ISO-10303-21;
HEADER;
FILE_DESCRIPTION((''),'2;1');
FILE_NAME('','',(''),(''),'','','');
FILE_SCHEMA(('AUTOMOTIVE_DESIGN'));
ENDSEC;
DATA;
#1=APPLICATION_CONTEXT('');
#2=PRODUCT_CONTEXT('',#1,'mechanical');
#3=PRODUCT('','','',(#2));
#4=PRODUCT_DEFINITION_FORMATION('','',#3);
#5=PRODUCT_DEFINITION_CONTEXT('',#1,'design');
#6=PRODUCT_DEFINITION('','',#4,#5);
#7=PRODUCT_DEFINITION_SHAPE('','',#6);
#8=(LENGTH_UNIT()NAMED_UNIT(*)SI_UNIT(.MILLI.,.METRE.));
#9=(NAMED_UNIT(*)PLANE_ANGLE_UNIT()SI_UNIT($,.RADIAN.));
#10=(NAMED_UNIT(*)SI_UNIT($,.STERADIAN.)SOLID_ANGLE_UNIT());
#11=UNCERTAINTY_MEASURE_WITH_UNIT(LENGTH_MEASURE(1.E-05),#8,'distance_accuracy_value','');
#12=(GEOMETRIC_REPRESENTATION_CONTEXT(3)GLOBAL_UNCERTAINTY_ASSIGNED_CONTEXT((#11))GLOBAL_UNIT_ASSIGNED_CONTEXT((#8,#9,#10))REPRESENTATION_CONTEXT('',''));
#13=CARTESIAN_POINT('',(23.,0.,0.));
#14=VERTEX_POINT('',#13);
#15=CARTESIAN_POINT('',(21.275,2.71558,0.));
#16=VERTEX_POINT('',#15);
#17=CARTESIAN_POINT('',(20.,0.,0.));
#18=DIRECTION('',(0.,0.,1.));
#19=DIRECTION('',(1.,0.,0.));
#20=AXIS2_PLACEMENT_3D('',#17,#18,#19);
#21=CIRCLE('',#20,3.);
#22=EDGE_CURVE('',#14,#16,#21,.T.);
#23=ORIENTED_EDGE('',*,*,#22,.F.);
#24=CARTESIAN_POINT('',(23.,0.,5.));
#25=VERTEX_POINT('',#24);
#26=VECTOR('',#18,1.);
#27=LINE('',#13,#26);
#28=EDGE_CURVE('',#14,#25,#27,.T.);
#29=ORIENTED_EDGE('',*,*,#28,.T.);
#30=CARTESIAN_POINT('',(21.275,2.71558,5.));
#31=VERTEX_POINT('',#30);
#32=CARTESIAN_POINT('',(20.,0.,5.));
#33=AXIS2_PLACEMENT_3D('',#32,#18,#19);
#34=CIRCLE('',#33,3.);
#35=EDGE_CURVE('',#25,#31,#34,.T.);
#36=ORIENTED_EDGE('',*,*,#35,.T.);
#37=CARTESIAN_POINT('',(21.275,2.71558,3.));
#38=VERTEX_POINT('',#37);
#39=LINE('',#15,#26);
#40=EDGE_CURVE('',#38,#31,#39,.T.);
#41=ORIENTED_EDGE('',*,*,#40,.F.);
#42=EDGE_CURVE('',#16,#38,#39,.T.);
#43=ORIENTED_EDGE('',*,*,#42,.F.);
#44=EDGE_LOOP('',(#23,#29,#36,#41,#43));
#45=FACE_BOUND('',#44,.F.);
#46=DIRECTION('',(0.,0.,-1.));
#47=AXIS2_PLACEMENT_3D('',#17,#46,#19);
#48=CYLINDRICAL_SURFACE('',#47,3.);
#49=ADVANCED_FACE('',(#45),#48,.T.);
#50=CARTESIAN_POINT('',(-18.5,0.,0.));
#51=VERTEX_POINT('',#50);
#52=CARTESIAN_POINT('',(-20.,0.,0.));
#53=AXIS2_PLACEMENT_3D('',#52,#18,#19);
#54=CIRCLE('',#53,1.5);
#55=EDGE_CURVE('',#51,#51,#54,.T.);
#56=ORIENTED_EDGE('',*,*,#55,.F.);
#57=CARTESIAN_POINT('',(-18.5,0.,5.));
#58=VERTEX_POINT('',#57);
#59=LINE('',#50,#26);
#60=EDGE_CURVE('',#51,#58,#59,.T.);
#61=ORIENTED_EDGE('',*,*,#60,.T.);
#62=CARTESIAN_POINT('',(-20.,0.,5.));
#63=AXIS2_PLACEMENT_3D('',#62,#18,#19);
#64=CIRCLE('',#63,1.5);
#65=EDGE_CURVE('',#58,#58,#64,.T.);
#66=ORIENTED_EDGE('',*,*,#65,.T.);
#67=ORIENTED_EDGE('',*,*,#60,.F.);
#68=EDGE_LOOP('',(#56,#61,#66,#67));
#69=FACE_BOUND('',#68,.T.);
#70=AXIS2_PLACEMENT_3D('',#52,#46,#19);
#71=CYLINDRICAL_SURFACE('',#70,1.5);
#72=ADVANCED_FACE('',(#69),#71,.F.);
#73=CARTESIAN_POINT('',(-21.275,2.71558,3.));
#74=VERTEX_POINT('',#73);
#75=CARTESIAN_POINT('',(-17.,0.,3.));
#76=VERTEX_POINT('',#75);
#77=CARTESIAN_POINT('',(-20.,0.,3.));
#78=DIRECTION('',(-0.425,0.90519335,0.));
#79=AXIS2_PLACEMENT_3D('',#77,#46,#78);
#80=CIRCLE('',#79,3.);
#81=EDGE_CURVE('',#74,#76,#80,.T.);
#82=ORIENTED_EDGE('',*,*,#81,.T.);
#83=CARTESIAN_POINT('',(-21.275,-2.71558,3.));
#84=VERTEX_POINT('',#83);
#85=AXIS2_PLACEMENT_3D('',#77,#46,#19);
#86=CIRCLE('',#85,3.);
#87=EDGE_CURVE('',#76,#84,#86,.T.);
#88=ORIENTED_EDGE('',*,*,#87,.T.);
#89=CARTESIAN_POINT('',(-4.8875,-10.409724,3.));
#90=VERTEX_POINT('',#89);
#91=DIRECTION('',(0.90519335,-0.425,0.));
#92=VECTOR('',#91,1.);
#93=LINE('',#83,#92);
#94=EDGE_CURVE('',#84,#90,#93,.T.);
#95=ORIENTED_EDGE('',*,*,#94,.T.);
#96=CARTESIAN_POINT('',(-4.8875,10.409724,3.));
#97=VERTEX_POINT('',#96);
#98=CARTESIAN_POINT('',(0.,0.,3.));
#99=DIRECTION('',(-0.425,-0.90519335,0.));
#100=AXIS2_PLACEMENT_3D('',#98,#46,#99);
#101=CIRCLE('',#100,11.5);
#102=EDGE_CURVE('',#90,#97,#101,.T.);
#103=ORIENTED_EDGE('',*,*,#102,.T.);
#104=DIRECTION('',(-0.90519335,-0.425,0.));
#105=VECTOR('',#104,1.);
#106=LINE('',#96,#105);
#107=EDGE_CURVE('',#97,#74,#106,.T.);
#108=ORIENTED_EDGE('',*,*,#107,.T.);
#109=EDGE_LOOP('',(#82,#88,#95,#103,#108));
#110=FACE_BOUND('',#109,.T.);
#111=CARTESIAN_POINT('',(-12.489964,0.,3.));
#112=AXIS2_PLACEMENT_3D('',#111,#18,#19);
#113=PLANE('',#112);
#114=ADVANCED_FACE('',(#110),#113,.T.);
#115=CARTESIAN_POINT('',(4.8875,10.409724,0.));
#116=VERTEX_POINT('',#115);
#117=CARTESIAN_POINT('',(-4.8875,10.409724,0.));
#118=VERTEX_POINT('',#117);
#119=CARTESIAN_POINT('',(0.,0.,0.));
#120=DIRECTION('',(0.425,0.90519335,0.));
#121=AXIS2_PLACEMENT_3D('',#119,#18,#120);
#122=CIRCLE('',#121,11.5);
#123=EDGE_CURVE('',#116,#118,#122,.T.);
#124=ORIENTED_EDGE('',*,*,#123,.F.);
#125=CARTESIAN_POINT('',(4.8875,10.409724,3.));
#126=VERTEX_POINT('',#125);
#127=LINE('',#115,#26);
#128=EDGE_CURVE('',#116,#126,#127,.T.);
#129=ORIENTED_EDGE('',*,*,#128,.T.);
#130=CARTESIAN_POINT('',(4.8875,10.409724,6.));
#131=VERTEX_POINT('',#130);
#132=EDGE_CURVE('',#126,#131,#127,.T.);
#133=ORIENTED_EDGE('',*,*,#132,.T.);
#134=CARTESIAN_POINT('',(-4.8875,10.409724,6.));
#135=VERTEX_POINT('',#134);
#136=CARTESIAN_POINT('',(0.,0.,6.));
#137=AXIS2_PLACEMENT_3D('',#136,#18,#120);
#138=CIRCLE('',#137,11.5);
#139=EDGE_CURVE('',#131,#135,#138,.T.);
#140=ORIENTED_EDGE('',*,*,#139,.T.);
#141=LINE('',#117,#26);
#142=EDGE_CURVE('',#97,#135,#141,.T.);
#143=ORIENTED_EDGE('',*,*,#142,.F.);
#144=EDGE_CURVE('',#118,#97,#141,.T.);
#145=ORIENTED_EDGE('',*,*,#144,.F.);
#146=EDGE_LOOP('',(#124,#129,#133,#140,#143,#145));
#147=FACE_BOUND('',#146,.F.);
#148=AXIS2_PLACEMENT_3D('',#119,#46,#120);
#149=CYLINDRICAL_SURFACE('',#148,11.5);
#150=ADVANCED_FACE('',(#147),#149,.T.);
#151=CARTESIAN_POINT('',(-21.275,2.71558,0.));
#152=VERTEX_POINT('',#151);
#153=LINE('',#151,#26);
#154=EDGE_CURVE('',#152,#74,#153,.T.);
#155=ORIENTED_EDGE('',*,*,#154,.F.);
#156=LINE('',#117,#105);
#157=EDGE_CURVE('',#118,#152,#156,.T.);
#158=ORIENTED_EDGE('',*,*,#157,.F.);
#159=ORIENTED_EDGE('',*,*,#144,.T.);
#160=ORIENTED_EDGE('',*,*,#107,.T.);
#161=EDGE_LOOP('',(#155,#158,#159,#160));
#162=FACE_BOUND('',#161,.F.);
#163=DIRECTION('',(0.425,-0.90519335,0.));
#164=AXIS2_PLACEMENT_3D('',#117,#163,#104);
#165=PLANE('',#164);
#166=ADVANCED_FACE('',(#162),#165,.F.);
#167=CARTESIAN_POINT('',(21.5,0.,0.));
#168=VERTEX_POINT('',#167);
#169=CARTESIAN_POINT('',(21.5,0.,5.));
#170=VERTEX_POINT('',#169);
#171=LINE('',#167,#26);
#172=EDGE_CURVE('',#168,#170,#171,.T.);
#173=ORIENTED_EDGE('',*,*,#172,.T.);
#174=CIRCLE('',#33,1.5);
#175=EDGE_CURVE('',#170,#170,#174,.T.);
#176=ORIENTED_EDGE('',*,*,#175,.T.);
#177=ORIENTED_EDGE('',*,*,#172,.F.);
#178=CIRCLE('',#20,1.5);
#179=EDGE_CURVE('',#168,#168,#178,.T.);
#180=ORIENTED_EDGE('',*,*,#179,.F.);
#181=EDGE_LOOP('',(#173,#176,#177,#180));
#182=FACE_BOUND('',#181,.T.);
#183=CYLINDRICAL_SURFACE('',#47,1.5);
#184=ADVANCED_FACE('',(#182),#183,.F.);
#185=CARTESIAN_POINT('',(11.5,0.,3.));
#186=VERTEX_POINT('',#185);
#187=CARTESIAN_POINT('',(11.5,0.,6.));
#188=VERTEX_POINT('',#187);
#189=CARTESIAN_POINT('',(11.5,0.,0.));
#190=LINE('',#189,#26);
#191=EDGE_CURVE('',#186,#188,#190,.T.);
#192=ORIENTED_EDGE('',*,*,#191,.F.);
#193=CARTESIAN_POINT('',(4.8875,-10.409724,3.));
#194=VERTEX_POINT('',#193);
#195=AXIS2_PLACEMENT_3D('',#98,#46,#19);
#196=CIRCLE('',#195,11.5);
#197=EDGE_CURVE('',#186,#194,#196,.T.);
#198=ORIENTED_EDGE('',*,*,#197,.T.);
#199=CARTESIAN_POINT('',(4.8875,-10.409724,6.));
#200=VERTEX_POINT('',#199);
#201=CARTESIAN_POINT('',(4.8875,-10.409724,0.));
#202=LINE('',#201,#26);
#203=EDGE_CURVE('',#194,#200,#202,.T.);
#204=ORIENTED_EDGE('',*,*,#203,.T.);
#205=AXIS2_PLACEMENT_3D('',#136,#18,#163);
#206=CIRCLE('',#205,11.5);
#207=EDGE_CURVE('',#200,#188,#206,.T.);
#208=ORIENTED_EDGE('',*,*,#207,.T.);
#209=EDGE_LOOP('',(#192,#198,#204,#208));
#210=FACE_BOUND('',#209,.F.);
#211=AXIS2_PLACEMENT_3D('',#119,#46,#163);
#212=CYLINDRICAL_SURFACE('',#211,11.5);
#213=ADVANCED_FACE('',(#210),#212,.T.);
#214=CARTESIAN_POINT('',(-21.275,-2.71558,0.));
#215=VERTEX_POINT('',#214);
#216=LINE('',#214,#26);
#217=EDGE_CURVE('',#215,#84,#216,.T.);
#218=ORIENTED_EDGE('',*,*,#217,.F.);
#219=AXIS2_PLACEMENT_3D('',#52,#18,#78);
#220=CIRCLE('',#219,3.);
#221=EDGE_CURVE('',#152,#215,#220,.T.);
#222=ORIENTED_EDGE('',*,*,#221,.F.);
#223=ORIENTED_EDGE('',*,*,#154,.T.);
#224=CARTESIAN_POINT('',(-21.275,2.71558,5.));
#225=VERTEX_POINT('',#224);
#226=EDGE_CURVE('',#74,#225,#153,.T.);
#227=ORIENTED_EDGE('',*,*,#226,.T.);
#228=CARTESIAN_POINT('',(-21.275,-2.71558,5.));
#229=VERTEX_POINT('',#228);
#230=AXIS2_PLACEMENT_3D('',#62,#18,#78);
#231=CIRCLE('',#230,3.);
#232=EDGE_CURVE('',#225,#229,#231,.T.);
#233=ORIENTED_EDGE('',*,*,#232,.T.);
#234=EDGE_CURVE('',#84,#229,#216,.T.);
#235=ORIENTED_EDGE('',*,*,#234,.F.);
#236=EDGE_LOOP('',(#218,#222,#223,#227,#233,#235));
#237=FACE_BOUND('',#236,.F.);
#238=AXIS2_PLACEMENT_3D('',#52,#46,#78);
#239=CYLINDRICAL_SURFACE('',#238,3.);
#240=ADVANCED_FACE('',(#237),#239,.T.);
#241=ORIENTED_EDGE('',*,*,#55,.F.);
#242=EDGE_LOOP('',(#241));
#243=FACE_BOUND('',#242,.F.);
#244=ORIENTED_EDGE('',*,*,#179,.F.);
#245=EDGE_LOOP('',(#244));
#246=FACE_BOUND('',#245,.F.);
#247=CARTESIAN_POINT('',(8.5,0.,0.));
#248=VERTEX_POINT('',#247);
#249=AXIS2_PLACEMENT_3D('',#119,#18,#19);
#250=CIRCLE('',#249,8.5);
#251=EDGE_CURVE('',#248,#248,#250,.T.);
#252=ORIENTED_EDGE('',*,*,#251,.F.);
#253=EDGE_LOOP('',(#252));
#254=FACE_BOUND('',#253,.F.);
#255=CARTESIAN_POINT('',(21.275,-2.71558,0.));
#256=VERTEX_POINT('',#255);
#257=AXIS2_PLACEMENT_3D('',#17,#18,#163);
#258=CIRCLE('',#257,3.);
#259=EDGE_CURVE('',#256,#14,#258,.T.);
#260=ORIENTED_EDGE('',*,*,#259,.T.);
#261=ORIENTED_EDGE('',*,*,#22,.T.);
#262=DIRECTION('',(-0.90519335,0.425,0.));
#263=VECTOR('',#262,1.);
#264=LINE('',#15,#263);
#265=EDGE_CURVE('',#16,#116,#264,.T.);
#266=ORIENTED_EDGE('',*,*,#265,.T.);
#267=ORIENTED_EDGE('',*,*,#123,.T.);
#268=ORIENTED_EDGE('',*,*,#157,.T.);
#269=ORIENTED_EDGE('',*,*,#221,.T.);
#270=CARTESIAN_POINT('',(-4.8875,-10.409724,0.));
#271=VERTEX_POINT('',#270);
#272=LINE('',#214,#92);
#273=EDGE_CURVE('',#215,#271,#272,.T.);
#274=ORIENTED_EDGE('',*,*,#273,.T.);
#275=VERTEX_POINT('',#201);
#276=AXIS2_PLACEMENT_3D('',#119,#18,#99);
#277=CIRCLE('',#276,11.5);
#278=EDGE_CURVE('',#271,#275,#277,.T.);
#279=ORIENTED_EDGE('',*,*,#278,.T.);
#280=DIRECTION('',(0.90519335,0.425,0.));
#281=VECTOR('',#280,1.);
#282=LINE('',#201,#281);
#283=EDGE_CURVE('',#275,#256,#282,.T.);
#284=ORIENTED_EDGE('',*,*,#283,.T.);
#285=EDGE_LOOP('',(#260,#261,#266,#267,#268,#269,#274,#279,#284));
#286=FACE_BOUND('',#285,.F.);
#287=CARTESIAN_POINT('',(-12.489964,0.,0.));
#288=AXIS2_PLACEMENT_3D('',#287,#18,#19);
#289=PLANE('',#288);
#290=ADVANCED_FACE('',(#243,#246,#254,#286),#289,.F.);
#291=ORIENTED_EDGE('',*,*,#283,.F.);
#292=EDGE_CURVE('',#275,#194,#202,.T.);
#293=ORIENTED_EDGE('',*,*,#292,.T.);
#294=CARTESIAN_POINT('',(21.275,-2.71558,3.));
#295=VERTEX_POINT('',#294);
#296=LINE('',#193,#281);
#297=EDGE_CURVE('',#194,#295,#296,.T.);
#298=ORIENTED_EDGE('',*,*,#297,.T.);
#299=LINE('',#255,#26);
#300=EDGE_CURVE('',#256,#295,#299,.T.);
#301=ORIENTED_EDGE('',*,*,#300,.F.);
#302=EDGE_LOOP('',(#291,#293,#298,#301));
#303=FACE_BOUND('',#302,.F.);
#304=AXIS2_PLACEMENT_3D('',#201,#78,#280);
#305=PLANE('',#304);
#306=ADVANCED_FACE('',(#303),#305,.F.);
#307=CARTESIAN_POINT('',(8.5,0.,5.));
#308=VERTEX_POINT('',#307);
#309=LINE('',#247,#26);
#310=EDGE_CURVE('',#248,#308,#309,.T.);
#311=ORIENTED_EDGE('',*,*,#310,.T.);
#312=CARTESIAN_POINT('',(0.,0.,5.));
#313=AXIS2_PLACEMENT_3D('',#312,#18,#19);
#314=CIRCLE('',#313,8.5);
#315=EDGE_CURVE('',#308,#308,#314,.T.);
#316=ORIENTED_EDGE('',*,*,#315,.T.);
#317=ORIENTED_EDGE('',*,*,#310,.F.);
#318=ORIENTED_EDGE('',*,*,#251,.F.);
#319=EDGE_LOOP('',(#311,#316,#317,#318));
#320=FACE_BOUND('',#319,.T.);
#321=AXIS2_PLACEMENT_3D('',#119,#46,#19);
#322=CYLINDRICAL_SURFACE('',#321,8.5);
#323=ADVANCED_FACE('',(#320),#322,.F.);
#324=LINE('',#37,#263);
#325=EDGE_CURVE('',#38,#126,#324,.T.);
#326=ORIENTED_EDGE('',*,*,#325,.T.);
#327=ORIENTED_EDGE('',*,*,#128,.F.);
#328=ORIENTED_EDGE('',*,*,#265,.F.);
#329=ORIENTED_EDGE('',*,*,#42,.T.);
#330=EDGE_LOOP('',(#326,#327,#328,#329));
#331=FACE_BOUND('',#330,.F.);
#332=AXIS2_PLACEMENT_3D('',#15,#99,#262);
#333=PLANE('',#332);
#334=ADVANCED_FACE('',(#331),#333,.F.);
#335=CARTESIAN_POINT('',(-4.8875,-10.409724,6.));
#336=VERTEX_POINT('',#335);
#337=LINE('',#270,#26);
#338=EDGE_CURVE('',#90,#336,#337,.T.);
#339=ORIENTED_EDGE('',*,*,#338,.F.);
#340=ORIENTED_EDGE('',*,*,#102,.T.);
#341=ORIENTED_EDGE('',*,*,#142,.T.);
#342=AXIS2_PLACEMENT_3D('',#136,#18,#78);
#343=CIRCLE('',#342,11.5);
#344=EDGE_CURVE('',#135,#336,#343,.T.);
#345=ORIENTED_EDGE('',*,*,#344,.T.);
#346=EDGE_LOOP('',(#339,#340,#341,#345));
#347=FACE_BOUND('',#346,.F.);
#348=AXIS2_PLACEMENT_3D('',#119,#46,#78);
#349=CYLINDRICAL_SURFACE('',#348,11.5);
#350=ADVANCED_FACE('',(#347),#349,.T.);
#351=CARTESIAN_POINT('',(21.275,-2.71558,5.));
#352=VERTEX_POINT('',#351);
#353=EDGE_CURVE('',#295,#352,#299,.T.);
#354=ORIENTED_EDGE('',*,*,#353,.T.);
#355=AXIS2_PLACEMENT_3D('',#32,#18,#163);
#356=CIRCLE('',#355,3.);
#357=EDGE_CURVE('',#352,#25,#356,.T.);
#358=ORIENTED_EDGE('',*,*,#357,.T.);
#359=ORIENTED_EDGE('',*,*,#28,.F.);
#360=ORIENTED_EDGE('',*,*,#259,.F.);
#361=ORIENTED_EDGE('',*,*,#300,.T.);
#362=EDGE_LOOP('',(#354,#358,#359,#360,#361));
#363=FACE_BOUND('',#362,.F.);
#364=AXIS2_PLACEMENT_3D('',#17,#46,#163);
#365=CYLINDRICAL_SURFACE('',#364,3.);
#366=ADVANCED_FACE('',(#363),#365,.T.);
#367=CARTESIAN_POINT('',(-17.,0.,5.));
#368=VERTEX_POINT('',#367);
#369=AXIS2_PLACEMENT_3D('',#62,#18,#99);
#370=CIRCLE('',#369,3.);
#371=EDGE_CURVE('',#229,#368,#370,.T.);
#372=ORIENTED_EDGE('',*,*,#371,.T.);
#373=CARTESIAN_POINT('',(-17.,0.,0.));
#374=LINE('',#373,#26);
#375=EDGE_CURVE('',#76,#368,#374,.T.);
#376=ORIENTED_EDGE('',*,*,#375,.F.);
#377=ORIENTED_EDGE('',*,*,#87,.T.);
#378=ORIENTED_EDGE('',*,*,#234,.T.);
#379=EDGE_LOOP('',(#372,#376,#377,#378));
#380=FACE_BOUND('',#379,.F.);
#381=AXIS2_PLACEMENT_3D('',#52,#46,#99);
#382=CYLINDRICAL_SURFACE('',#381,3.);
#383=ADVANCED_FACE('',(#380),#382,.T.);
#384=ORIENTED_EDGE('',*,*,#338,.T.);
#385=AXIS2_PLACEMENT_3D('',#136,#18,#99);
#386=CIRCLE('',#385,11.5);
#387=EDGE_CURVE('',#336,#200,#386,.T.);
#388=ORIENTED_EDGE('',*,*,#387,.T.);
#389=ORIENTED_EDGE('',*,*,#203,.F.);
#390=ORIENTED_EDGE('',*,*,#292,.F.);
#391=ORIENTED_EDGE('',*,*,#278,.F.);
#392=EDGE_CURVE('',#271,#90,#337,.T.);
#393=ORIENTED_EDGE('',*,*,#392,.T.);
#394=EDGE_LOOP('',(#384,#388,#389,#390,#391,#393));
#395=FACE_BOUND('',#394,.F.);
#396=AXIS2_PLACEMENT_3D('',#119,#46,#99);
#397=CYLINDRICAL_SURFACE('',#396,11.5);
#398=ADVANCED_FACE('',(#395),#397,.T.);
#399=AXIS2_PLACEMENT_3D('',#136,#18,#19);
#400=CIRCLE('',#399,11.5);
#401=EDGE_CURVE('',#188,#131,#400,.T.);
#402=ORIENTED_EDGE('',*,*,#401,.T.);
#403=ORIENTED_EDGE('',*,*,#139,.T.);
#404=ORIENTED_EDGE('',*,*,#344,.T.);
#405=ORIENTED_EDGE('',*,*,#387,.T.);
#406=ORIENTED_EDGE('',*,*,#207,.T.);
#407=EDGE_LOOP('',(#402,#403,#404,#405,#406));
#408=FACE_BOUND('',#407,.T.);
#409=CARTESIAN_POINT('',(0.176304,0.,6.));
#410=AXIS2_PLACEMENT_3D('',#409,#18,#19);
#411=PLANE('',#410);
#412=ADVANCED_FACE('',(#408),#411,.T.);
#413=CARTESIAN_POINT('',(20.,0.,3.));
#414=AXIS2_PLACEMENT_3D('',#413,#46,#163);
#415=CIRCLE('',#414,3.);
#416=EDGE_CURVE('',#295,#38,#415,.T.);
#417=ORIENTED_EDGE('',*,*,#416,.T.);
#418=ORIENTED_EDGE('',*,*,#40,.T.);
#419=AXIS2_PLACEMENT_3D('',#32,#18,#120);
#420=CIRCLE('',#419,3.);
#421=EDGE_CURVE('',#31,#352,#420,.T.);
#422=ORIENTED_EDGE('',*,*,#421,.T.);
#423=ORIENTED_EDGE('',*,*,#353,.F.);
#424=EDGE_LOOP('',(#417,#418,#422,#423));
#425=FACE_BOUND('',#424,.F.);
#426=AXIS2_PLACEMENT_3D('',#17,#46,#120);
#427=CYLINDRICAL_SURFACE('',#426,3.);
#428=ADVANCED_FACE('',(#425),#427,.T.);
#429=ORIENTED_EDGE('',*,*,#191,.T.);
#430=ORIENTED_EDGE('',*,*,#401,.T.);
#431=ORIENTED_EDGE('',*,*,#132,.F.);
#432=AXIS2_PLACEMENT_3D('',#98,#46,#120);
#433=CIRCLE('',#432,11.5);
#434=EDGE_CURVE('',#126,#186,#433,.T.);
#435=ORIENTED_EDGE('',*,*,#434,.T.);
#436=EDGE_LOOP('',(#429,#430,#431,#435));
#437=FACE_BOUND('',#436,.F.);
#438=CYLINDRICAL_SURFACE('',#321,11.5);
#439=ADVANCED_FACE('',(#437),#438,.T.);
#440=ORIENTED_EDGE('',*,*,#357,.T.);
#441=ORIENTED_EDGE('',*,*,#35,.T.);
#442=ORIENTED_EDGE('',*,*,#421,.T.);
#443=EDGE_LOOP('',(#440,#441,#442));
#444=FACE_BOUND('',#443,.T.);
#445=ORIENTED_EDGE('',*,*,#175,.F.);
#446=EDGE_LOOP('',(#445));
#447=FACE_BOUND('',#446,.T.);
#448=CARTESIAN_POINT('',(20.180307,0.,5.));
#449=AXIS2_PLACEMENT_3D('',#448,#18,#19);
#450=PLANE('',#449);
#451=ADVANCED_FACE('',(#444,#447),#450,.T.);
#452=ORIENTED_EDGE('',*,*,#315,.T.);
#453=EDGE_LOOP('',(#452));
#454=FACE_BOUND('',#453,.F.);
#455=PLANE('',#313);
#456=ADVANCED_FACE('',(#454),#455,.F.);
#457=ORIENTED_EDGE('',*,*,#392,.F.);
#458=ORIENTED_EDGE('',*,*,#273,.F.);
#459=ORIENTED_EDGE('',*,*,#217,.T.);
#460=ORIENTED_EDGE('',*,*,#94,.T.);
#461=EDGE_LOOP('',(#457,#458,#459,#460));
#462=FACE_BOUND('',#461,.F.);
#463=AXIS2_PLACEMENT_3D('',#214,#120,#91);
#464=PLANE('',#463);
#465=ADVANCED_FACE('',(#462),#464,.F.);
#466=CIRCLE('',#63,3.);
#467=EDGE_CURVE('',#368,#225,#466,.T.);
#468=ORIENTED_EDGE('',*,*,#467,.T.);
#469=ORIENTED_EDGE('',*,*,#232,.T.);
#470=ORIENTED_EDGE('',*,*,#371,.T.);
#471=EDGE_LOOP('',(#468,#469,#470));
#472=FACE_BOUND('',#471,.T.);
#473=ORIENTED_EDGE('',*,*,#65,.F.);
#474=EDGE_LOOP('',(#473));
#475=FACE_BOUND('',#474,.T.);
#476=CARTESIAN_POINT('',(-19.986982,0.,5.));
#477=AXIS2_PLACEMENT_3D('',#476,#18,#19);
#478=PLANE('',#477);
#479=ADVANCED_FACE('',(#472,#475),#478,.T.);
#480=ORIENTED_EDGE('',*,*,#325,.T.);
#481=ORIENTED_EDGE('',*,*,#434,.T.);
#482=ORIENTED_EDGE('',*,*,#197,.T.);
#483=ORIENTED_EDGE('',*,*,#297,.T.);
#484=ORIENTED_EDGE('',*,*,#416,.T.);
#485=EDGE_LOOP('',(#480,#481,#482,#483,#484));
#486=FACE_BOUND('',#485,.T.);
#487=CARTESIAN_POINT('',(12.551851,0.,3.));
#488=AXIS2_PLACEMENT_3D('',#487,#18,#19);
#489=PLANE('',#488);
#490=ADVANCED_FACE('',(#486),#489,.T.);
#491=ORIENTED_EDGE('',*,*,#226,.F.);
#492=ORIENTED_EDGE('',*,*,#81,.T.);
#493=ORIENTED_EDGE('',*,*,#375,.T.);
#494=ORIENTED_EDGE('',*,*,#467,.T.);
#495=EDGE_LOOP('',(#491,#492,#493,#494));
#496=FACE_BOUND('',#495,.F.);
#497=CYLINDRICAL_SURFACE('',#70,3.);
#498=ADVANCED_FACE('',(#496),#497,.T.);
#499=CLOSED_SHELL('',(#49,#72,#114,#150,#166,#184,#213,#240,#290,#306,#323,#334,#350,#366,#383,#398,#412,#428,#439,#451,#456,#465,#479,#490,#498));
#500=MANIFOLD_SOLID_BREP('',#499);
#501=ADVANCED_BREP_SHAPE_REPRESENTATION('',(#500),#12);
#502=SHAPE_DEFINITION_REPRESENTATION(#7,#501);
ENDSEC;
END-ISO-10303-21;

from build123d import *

# Parameters (mm, degrees)
F0_R     = 8.5
F1_DEPTH = 6
F2_DEPTH = 5
F0_R_2   = 1.5
F3_DEPTH = 5
F4_DEPTH = 3


with BuildPart() as f1:
    # F0 (on Top) → F1 (new body)
    with BuildSketch(Plane.XY):
        with BuildLine():
            ThreePointArc((4.8875, -10.4097235194), (9.7071172343, -6.1661880445), (11.5, 0))
            ThreePointArc((11.5, 0), (9.7071172343, 6.1661880445), (4.8875, 10.4097235194))
            ThreePointArc((4.8875, 10.4097235194), (0, 11.5), (-4.8875, 10.4097235194))
            ThreePointArc((-4.8875, 10.4097235194), (-11.5, 0), (-4.8875, -10.4097235194))
            ThreePointArc((-4.8875, -10.4097235194), (0, -11.5), (4.8875, -10.4097235194))
        make_face()
        Circle(F0_R, mode=Mode.SUBTRACT)
        Circle(F0_R)
    extrude(amount=F1_DEPTH)

    # F0 (on Top) → F2 (cut)
    with BuildSketch(Plane.XY):
        Circle(F0_R)
    extrude(amount=F2_DEPTH, mode=Mode.SUBTRACT)



with BuildPart() as f3:
    # F0 (on Top) → F3 (new body)
    with BuildSketch(Plane.XY):
        with BuildLine():
            ThreePointArc((-17, 0), (-18.3914292058, 2.5322914524), (-21.275, 2.7155800485))
            ThreePointArc((-21.275, 2.7155800485), (-23, 0), (-21.275, -2.7155800485))
            ThreePointArc((-21.275, -2.7155800485), (-18.3914292058, -2.5322914524), (-17, 0))
        make_face()
        with Locations((-20, 0)):
            Circle(F0_R_2, mode=Mode.SUBTRACT)
    extrude(amount=F3_DEPTH)


with BuildPart() as f3b:
    # F0 (on Top) → F3, piece 2 (new body)
    with BuildSketch(Plane.XY):
        with BuildLine():
            ThreePointArc((23, 0), (22.5322914524, 1.6085707942), (21.275, 2.7155800485))
            ThreePointArc((21.275, 2.7155800485), (17, 0), (21.275, -2.7155800485))
            ThreePointArc((21.275, -2.7155800485), (22.5322914524, -1.6085707942), (23, 0))
        make_face()
        with Locations((20, 0)):
            Circle(F0_R_2, mode=Mode.SUBTRACT)
    extrude(amount=F3_DEPTH)


with BuildPart() as f1_1:
    add(f1.part)

    add(f3.part)  # F4 merges F3

    add(f3b.part)  # F4 merges F3b
    # F0 (on Top) → F4 (join)
    with BuildSketch(Plane.XY):
        with BuildLine():
            ThreePointArc((-4.8875, -10.4097235194), (-11.5, 0), (-4.8875, 10.4097235194))
            Line((-4.8875, 10.4097235194), (-21.275, 2.7155800485))
            ThreePointArc((-21.275, 2.7155800485), (-18.3914292058, 2.5322914524), (-17, 0))
            ThreePointArc((-17, 0), (-18.3914292058, -2.5322914524), (-21.275, -2.7155800485))
            Line((-21.275, -2.7155800485), (-4.8875, -10.4097235194))
        make_face()
        with BuildLine():
            ThreePointArc((4.8875, 10.4097235194), (9.7071172343, 6.1661880445), (11.5, 0))
            ThreePointArc((11.5, 0), (9.7071172343, -6.1661880445), (4.8875, -10.4097235194))
            Line((4.8875, -10.4097235194), (21.275, -2.7155800485))
            ThreePointArc((21.275, -2.7155800485), (17, 0), (21.275, 2.7155800485))
            Line((21.275, 2.7155800485), (4.8875, 10.4097235194))
        make_face()
    extrude(amount=F4_DEPTH)


solid = f1_1.part
